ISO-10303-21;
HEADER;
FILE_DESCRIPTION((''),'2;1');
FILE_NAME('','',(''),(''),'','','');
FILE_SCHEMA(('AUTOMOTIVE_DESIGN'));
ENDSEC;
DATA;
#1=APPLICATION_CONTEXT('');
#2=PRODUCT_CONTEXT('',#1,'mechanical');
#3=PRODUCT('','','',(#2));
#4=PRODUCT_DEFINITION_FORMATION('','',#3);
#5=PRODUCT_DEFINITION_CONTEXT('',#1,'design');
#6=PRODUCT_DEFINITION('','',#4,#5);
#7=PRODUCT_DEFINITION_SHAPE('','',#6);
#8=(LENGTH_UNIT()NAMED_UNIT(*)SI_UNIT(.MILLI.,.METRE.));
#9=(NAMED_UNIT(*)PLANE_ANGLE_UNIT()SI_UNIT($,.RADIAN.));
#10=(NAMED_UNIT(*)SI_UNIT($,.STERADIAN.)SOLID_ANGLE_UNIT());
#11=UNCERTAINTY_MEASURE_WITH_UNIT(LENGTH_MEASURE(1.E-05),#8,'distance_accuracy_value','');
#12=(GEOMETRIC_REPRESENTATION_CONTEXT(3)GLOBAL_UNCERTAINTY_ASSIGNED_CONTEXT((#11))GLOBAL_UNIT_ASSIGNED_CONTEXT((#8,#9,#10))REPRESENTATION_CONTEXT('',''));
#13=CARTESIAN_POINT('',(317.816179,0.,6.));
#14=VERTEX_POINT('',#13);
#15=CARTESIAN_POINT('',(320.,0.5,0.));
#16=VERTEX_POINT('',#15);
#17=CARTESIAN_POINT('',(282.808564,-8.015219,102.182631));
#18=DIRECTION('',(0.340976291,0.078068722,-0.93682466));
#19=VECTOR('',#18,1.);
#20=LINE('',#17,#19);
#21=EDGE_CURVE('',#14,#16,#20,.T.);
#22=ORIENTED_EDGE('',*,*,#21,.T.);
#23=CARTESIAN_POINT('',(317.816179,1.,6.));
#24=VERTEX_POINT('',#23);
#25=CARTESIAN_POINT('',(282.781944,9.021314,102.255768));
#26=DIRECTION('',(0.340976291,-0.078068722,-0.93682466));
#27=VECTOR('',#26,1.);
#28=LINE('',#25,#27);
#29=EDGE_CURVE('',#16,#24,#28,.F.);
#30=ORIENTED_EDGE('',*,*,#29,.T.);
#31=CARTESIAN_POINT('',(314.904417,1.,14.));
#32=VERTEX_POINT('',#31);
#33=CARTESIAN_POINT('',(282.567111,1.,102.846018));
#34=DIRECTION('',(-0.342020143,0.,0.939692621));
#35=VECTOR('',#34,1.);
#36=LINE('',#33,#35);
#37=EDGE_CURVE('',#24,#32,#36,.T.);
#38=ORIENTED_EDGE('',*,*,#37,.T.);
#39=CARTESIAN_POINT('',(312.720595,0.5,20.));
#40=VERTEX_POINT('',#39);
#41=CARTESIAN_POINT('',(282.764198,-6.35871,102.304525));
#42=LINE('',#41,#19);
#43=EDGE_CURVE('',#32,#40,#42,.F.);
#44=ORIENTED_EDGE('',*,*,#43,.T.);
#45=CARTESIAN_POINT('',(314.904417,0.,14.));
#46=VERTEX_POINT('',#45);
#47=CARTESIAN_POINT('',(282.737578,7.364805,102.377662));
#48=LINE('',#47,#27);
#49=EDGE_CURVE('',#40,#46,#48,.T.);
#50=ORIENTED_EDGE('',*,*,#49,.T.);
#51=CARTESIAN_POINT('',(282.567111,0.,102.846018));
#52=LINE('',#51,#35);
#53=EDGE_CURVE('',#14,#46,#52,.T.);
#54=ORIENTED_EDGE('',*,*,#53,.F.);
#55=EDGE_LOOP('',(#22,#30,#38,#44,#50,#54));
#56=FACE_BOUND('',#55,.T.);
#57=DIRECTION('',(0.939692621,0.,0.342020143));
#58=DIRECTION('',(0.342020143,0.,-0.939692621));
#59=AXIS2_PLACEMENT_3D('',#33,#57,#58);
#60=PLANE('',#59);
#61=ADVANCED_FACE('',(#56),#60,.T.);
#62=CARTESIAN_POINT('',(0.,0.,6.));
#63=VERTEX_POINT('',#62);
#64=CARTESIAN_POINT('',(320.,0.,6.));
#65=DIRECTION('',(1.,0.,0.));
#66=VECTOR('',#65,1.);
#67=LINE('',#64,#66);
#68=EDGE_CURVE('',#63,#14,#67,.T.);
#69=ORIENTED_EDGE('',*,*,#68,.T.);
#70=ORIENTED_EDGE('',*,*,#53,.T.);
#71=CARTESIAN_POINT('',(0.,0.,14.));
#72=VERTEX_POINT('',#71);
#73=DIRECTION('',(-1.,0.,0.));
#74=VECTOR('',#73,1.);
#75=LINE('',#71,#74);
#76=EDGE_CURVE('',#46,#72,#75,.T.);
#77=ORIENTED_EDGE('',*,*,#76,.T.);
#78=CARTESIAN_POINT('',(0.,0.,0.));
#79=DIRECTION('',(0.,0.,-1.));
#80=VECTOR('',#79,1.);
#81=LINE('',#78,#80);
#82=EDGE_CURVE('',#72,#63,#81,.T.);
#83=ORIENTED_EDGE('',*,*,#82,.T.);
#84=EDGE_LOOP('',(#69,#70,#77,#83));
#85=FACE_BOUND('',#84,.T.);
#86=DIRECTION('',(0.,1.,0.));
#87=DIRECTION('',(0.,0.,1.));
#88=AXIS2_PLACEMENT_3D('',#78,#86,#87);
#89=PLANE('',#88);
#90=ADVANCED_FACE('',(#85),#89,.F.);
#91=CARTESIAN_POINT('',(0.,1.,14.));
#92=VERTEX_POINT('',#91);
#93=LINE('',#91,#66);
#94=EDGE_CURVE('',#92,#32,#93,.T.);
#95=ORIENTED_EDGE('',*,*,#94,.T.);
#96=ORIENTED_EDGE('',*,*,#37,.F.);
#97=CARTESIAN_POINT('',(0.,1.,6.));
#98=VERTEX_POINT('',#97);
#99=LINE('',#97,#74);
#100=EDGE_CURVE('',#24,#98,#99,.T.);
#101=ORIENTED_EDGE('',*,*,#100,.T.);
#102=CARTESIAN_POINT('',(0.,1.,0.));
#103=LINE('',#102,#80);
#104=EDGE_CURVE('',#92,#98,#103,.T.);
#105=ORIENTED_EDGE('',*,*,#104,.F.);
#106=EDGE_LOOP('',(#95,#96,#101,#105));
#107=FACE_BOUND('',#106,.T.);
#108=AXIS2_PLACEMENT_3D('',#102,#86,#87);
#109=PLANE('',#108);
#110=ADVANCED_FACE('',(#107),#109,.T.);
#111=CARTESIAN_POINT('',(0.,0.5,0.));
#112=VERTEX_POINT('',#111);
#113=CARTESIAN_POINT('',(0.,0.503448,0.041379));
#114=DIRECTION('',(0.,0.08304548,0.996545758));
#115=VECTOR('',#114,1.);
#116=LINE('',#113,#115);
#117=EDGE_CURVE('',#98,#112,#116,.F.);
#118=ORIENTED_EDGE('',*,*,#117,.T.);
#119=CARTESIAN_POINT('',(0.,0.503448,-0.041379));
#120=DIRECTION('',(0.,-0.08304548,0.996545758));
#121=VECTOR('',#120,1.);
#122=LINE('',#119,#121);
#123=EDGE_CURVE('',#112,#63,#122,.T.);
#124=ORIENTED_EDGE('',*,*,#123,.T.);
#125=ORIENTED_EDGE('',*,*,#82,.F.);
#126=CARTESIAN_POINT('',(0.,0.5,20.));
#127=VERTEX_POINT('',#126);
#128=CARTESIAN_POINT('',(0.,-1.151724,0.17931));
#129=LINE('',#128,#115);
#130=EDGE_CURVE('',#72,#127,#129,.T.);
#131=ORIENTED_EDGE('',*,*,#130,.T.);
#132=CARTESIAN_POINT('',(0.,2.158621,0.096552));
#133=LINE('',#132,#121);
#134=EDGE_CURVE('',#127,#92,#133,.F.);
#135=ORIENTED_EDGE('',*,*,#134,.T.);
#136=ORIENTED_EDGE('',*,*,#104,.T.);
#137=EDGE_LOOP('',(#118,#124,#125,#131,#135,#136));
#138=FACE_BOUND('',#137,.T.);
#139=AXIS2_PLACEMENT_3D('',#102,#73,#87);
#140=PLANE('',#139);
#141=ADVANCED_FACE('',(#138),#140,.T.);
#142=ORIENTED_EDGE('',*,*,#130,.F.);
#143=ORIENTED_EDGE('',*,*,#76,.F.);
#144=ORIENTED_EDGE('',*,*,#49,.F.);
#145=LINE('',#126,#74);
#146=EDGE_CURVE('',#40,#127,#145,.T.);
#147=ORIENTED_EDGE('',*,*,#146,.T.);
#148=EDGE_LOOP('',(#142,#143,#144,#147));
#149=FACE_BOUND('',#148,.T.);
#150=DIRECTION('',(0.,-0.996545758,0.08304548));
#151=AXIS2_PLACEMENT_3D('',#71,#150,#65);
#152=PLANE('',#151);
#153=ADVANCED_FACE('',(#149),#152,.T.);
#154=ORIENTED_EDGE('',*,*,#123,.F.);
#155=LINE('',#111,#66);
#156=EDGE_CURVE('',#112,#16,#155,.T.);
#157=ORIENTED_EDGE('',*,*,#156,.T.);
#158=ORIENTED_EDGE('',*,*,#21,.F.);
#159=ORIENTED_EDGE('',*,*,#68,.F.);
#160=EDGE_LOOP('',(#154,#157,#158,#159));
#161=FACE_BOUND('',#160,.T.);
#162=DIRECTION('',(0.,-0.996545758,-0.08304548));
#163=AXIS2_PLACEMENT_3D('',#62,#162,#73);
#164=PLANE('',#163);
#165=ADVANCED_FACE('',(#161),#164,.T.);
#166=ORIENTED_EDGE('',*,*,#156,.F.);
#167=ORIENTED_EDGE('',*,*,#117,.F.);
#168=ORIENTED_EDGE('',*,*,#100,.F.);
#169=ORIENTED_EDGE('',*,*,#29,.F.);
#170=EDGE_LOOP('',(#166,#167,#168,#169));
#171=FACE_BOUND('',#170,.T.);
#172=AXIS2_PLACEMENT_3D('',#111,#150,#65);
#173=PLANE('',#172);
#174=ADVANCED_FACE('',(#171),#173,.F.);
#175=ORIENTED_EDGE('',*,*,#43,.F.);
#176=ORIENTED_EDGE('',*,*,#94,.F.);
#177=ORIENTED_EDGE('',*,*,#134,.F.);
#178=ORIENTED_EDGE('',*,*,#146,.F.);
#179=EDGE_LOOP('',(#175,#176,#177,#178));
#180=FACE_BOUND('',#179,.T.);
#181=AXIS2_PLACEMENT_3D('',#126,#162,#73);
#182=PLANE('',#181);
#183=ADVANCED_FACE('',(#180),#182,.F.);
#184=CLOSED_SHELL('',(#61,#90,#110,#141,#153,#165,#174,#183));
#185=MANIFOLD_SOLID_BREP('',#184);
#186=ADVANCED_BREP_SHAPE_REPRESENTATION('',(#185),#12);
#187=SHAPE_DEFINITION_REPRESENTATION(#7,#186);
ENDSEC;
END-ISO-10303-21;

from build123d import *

# Parameters (mm, degrees)
BOSS_EXTRUDE1_DEPTH = 1
CHAMFER1_SIZE       = 0.5
CHAMFER1_SIZE_2     = 6
CHAMFER2_SIZE       = 6
CHAMFER2_SIZE_2     = 0.5


with BuildPart() as part:
    # Sketch1 → Boss-Extrude1 (new body)
    with BuildSketch(Plane(origin=(0, 0, 0), x_dir=(1, 0, 0), z_dir=(0, 1, 0))):
        Polygon((0, -20), (0, 0), (320, 0), (312.720595315, -20), align=None)
    extrude(amount=BOSS_EXTRUDE1_DEPTH)

    # Chamfer1
    # the kernel refuses this chamfer: 6, 0.5 mm, written as the material it takes off along each edge
    with BuildSketch(Plane(origin=(-15.598007041, 0, 0), x_dir=(0, 0.908488621033374, -0.4179095900465534), z_dir=(1, 0, 0))) as chamfer1_piece_1:
        Polygon((CHAMFER1_SIZE * 0.908488621033, CHAMFER1_SIZE * 0.417909590047), (-CHAMFER1_SIZE_2 * 0.417909590047, CHAMFER1_SIZE_2 * 0.908488621033), (0, 0), align=None)
    extrude(amount=351.196014082, mode=Mode.SUBTRACT)
    with BuildSketch(Plane(origin=(-15.598007041, 1, 0), x_dir=(0, -0.908488621033374, -0.4179095900465534), z_dir=(1, 0, 0))) as chamfer1_piece_2:
        Polygon((CHAMFER1_SIZE * 0.908488621033, -CHAMFER1_SIZE * 0.417909590047), (-CHAMFER1_SIZE_2 * 0.417909590047, -CHAMFER1_SIZE_2 * 0.908488621033), (0, 0), align=None)
    extrude(amount=351.196014082, mode=Mode.SUBTRACT)

    # Chamfer2
    # the kernel refuses this chamfer: 6, 0.5 mm, written as the material it takes off along each edge
    with BuildSketch(Plane(origin=(328.318602356, 0, 20), x_dir=(0, -0.0031944650224573633, -0.9999948976835933), z_dir=(-1, 0, 0))) as chamfer2_piece_1:
        Polygon((CHAMFER2_SIZE * 0.999994897684, -CHAMFER2_SIZE * 0.00319446502246), (-CHAMFER2_SIZE_2 * 0.00319446502246, -CHAMFER2_SIZE_2 * 0.999994897684), (0, 0), align=None)
    extrude(amount=343.916609397, mode=Mode.SUBTRACT)
    with BuildSketch(Plane(origin=(328.318602356, 1, 20), x_dir=(0, 0.0031944650224573715, -0.9999948976835933), z_dir=(-1, 0, 0))) as chamfer2_piece_2:
        Polygon((CHAMFER2_SIZE * 0.999994897684, CHAMFER2_SIZE * 0.00319446502246), (-CHAMFER2_SIZE_2 * 0.00319446502246, CHAMFER2_SIZE_2 * 0.999994897684), (0, 0), align=None)
    extrude(amount=343.916609397, mode=Mode.SUBTRACT)


solid = part.part
